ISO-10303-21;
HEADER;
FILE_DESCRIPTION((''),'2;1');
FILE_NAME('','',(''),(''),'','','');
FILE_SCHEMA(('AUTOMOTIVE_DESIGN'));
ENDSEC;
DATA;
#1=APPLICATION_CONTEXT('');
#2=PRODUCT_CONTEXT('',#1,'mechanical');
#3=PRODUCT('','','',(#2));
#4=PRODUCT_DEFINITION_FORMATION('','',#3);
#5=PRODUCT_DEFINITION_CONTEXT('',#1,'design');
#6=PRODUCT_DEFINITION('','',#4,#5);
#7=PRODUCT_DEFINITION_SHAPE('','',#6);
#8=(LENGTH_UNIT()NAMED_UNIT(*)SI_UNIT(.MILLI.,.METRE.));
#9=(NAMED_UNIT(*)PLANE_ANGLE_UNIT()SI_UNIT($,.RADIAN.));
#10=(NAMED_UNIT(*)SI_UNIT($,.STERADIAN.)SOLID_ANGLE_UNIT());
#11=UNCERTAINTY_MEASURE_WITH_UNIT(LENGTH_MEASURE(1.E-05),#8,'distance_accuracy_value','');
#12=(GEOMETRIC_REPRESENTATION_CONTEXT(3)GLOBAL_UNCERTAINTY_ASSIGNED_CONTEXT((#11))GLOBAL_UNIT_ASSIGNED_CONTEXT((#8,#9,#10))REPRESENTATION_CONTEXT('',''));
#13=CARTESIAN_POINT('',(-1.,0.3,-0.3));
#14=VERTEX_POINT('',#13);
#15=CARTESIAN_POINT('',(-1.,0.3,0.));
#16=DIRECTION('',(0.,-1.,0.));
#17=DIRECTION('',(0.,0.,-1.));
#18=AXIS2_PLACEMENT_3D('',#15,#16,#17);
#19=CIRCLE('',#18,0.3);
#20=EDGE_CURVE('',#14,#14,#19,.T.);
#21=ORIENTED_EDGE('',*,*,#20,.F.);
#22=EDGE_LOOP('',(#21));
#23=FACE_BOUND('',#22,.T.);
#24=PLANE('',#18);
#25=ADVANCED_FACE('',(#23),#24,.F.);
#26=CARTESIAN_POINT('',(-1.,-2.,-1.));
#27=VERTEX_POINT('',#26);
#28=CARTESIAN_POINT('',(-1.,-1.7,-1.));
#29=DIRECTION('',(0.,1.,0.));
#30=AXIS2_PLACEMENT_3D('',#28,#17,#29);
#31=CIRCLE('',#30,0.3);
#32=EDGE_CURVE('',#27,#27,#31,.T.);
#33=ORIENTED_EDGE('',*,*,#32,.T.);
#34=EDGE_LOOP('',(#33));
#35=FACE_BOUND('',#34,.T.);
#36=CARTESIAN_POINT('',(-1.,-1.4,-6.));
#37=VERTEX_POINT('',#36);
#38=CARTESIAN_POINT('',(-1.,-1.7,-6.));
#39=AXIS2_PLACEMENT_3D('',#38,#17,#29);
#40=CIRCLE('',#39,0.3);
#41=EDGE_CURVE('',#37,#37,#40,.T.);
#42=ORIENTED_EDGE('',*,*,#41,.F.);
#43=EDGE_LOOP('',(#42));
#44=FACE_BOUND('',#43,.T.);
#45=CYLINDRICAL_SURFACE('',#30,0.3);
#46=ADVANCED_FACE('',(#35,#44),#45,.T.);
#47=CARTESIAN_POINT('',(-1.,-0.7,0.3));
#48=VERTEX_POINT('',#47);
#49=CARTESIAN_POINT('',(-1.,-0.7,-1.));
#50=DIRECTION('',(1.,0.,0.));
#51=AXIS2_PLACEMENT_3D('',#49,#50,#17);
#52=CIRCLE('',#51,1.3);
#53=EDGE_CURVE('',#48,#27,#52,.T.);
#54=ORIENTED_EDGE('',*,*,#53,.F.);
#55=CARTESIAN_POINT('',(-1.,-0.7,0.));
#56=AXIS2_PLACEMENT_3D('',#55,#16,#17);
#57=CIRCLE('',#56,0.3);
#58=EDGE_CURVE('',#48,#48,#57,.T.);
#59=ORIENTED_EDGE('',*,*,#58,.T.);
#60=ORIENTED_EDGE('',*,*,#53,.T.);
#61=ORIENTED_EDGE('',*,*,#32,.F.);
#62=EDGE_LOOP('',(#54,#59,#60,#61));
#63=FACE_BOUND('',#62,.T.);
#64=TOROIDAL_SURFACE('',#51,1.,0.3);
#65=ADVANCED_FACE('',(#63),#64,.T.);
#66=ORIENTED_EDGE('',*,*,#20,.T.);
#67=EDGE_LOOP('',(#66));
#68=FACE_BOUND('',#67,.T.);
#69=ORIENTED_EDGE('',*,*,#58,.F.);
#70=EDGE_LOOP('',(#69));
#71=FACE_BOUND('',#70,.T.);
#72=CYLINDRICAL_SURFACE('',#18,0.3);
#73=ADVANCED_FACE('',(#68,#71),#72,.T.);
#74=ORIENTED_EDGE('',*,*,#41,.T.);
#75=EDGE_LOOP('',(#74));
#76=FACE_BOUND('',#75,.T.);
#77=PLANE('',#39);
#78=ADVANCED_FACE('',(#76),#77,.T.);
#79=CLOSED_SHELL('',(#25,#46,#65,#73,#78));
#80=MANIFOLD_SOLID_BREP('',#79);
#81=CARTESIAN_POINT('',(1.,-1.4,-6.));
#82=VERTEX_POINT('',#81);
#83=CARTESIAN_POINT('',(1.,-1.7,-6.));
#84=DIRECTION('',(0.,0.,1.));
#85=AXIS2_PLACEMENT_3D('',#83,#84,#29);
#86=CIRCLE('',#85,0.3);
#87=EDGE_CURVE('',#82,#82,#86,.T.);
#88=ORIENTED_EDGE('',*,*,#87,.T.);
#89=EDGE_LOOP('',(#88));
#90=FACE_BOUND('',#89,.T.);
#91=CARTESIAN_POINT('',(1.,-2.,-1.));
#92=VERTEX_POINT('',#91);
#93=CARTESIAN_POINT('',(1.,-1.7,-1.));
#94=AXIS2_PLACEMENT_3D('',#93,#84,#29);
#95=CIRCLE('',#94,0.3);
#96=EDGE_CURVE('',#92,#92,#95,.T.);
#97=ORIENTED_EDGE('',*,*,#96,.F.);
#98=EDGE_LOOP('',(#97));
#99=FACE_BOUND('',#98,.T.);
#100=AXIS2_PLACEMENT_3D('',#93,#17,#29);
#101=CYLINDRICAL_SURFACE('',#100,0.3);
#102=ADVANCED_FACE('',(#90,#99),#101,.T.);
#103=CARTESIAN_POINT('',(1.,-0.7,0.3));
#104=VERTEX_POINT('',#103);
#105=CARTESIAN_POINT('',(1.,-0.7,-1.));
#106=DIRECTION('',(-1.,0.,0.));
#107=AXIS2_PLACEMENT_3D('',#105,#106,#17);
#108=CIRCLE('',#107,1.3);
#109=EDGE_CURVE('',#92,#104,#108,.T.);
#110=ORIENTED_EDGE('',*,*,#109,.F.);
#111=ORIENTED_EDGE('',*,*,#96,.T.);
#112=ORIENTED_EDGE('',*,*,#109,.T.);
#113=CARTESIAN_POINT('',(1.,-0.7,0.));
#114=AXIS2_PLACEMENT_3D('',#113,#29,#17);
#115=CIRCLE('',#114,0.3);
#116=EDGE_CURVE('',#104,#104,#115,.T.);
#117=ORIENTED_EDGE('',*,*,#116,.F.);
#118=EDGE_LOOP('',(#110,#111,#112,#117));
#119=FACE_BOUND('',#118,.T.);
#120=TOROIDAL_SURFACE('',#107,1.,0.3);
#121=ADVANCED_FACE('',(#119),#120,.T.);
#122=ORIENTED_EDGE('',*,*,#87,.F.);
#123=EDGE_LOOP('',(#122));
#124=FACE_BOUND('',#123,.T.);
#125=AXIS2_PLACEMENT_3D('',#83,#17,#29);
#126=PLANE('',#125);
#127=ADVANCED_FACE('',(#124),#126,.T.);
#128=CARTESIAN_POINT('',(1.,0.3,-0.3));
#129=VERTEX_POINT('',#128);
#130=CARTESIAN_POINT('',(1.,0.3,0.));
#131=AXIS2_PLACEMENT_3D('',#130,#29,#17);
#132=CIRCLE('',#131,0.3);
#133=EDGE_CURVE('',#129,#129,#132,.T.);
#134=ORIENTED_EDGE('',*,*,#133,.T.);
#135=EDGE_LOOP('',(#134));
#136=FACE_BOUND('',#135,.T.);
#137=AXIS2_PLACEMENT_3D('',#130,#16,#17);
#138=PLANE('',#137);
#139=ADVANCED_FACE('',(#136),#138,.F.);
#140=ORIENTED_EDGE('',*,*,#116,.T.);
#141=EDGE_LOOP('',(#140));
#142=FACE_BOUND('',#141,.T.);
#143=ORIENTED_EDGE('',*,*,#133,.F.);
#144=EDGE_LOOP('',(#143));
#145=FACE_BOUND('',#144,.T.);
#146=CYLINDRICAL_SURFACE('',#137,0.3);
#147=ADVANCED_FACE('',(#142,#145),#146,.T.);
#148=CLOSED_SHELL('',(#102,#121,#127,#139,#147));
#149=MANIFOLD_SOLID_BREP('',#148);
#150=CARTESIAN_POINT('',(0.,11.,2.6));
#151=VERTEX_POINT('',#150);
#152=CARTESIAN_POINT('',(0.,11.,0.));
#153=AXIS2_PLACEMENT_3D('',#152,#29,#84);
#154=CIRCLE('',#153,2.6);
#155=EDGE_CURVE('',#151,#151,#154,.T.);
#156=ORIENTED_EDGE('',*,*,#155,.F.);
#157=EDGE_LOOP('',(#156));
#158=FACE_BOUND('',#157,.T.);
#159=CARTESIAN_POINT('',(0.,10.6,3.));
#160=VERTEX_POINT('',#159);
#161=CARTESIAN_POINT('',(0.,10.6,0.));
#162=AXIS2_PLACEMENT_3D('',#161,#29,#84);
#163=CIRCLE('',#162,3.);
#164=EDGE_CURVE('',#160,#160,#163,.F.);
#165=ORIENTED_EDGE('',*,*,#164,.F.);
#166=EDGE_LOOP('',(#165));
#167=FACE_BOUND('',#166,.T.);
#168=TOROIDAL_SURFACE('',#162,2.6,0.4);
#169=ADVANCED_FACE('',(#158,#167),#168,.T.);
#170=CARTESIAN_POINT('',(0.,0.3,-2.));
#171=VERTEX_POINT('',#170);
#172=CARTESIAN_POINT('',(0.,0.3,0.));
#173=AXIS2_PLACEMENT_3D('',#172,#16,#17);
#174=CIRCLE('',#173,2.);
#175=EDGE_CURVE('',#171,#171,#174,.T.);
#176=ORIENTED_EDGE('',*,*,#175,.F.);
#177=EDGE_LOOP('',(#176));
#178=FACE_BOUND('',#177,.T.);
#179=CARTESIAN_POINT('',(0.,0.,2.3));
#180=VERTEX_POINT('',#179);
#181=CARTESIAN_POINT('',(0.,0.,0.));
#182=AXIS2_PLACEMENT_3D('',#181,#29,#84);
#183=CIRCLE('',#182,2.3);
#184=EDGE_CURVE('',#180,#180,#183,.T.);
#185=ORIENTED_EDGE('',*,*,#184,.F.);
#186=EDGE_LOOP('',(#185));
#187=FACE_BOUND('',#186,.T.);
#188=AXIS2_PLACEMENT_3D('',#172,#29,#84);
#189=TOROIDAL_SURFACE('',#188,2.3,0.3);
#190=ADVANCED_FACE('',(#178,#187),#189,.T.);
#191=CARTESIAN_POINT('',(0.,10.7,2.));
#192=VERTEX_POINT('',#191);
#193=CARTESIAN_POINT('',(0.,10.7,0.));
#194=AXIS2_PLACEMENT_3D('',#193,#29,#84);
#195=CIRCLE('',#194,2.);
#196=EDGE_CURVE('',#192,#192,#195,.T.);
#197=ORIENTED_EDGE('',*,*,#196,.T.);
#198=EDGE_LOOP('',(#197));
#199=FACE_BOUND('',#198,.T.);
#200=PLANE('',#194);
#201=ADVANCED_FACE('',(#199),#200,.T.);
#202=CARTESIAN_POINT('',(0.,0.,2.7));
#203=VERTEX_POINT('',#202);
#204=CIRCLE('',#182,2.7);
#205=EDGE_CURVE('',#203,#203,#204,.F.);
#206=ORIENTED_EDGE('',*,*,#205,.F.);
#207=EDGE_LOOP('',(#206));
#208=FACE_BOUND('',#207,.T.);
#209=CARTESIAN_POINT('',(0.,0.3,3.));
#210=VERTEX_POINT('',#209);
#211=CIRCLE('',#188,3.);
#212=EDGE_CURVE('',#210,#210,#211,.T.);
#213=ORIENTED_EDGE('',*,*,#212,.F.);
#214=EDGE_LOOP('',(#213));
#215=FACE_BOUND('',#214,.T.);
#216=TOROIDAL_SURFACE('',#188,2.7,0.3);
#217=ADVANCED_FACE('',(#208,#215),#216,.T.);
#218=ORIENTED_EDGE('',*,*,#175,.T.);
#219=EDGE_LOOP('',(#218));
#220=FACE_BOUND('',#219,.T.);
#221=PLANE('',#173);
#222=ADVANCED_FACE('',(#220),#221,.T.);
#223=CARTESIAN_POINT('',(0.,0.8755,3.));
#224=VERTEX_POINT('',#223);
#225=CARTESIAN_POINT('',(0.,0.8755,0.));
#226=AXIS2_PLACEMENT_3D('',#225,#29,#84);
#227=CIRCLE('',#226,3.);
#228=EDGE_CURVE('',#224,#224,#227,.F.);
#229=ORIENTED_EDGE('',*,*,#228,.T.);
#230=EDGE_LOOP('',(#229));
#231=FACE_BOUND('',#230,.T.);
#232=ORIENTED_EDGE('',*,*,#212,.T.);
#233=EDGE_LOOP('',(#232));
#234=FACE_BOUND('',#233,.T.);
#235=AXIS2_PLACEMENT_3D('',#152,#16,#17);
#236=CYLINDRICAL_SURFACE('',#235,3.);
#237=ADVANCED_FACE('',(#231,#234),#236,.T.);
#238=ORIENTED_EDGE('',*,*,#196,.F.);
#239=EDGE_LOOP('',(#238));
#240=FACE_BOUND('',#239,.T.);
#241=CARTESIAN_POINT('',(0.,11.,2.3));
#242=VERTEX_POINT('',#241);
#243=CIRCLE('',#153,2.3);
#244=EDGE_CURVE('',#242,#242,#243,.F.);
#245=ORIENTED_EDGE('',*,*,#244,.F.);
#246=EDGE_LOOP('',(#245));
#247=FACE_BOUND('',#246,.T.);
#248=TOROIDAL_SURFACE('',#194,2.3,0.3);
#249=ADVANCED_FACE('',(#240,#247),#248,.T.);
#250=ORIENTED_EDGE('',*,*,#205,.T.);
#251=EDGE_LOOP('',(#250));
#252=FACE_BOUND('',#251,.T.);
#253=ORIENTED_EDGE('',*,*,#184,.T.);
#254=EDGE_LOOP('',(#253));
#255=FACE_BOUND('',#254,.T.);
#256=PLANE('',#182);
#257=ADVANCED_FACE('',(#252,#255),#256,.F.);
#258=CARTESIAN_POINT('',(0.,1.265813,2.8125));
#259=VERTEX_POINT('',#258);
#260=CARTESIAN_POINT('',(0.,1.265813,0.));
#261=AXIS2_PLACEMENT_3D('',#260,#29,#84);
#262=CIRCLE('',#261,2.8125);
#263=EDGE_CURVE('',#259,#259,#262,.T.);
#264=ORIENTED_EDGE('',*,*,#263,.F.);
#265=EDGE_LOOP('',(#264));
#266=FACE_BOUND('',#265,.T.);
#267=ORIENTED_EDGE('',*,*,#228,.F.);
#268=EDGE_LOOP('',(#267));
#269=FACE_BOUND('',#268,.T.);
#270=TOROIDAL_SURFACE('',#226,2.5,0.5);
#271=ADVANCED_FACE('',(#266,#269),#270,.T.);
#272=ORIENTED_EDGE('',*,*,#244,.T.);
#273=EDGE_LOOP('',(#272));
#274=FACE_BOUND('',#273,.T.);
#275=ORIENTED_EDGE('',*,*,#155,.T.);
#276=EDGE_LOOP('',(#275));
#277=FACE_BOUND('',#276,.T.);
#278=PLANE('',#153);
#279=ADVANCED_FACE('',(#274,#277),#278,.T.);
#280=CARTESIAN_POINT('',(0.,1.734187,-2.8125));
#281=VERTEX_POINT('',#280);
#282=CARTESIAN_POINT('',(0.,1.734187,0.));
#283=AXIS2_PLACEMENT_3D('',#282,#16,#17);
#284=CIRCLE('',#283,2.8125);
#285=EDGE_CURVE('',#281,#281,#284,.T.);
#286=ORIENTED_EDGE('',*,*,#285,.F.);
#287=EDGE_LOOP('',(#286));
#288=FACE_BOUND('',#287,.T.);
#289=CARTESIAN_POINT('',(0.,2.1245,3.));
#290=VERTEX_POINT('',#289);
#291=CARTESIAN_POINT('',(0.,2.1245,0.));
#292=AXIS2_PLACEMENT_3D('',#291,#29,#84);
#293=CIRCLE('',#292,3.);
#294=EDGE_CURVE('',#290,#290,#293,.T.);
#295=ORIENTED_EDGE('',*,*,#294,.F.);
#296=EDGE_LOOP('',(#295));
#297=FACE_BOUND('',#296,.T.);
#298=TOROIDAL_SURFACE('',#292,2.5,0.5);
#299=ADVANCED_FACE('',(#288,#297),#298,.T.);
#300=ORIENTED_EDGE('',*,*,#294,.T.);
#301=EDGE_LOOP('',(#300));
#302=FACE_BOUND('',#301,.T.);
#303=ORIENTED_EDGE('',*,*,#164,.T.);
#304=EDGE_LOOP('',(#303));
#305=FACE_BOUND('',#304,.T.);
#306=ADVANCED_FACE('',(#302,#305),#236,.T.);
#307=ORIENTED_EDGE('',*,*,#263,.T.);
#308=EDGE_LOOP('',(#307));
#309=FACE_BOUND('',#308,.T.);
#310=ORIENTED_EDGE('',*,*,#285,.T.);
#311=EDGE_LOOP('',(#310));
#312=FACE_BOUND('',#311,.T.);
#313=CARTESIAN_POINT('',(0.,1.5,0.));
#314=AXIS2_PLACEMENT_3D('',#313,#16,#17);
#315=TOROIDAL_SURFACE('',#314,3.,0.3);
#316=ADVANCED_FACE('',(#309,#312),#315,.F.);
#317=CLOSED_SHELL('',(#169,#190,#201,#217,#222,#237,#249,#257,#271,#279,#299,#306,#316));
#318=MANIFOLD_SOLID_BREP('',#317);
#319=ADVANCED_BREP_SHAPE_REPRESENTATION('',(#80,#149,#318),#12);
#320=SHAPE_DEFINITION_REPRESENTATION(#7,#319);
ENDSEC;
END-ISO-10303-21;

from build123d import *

# Parameters (mm, degrees)
SKETCH_2_R          = 3
EXTRUDE_1_DEPTH     = 11
SKETCH_3_R          = 2
CUT_EXTRUDE_1_DEPTH = 0.3
SKETCH_4_R          = 0.3
CUT_EXTRUDE_START   = -0.3
SKETCH_7_R          = 2
CUT_EXTRUDE_2_DEPTH = 0.3
FILLET_2_R          = 0.5
FILLET_3_R          = 0.4
FILLET_4_R          = 0.3
FILLET_5_R          = 0.3
FILLET_6_R          = 0.3


with BuildPart() as part:
    # Эскиз2 → Бобышка-Вытянуть1 (new body)
    with BuildSketch(Plane(origin=(0, 0, 0), x_dir=(1, 0, 0), z_dir=(0, 1, 0))):
        with Locations(Location((0, 0, 0), (0, 0, 270))):
            Circle(SKETCH_2_R)
    extrude(amount=EXTRUDE_1_DEPTH)

    # Эскиз3 → Вырез-Вытянуть1 (cut)
    with BuildSketch(Plane.XZ):
        with Locations(Location((0, 0, 0), (0, 0, 270))):
            Circle(SKETCH_3_R)
    extrude(amount=-CUT_EXTRUDE_1_DEPTH, mode=Mode.SUBTRACT)

    # Эскиз7 → Вырез-Вытянуть2 (cut)
    with BuildSketch(Plane(origin=(0, 11, 0), x_dir=(1, 0, 0), z_dir=(0, 1, 0)).offset(CUT_EXTRUDE_START)):
        with Locations(Location((0, 0, 0), (0, 0, 90))):
            Circle(SKETCH_7_R)
    extrude(amount=CUT_EXTRUDE_2_DEPTH, mode=Mode.SUBTRACT)

    # Эскиз9 → Вырез-Повернуть1 (revolve, cut)
    with BuildSketch(Plane(origin=(0, 0, 0), x_dir=(0, 0, -1), z_dir=(1, 0, 0)), mode=Mode.PRIVATE) as cut_revolve_1_sk:
        with BuildLine():
            Line((-3, 1.8), (-3, 1.2))
            ThreePointArc((-3, 1.2), (-2.7, 1.5), (-3, 1.8))
        make_face()
    revolve(cut_revolve_1_sk.sketch.rotate(Axis((0, -2.369211138, 0), (0, 1, 0)), 180), axis=Axis((0, -2.369211138, 0), (0, 1, 0)), mode=Mode.SUBTRACT)

    # Скругление2
    fillet_2_edges = [part.edges().sort_by_distance(p)[0] for p in [
        (-3, 1.2, 0),
        (-3, 1.8, 0),
    ]]
    fillet(fillet_2_edges, radius=FILLET_2_R)

    # Скругление3
    fillet_3_edges = [part.edges().sort_by_distance(p)[0] for p in [
        (0, 11, -3),
    ]]
    fillet(fillet_3_edges, radius=FILLET_3_R)

    # Скругление4
    fillet_4_edges = [part.edges().sort_by_distance(p)[0] for p in [
        (0, 11, 2),
    ]]
    fillet(fillet_4_edges, radius=FILLET_4_R - 0.0001)  # a hair under: the kernel refuses the full size

    # Скругление5
    fillet_5_edges = [part.edges().sort_by_distance(p)[0] for p in [
        (0, 0, 2),
    ]]
    fillet(fillet_5_edges, radius=FILLET_5_R - 0.0001)  # a hair under: the kernel refuses the full size

    # Скругление6
    fillet_6_edges = [part.edges().sort_by_distance(p)[0] for p in [
        (0, 0, -3),
    ]]
    fillet(fillet_6_edges, radius=FILLET_6_R)


with BuildPart() as body_2:
    # По траектории1: sweep along a path in Эскиз6
    with BuildLine(Plane.ZY.offset(1)) as sweep_1_path:
        Line((0, 0.3), (0, -0.7))
        ThreePointArc((0, -0.7), (-0.292893219, -1.407106781), (-1, -1.7))
        Line((-1, -1.7), (-6, -1.7))
    # Эскиз4 → По траектории1 (sweep)
    with BuildSketch(Plane.XZ.offset(-0.3)):
        with Locations((-1, 0)):
            Circle(SKETCH_4_R)
    sweep(path=sweep_1_path.line)


with BuildPart() as body_3:
    # Зеркальное отражение1: mirrored copy
    add(body_2.part.mirror(Plane(origin=(0, 0, 0), x_dir=(0, 0, 1), z_dir=(1, 0, 0))))


solid = Compound([part.part, body_2.part, body_3.part])
